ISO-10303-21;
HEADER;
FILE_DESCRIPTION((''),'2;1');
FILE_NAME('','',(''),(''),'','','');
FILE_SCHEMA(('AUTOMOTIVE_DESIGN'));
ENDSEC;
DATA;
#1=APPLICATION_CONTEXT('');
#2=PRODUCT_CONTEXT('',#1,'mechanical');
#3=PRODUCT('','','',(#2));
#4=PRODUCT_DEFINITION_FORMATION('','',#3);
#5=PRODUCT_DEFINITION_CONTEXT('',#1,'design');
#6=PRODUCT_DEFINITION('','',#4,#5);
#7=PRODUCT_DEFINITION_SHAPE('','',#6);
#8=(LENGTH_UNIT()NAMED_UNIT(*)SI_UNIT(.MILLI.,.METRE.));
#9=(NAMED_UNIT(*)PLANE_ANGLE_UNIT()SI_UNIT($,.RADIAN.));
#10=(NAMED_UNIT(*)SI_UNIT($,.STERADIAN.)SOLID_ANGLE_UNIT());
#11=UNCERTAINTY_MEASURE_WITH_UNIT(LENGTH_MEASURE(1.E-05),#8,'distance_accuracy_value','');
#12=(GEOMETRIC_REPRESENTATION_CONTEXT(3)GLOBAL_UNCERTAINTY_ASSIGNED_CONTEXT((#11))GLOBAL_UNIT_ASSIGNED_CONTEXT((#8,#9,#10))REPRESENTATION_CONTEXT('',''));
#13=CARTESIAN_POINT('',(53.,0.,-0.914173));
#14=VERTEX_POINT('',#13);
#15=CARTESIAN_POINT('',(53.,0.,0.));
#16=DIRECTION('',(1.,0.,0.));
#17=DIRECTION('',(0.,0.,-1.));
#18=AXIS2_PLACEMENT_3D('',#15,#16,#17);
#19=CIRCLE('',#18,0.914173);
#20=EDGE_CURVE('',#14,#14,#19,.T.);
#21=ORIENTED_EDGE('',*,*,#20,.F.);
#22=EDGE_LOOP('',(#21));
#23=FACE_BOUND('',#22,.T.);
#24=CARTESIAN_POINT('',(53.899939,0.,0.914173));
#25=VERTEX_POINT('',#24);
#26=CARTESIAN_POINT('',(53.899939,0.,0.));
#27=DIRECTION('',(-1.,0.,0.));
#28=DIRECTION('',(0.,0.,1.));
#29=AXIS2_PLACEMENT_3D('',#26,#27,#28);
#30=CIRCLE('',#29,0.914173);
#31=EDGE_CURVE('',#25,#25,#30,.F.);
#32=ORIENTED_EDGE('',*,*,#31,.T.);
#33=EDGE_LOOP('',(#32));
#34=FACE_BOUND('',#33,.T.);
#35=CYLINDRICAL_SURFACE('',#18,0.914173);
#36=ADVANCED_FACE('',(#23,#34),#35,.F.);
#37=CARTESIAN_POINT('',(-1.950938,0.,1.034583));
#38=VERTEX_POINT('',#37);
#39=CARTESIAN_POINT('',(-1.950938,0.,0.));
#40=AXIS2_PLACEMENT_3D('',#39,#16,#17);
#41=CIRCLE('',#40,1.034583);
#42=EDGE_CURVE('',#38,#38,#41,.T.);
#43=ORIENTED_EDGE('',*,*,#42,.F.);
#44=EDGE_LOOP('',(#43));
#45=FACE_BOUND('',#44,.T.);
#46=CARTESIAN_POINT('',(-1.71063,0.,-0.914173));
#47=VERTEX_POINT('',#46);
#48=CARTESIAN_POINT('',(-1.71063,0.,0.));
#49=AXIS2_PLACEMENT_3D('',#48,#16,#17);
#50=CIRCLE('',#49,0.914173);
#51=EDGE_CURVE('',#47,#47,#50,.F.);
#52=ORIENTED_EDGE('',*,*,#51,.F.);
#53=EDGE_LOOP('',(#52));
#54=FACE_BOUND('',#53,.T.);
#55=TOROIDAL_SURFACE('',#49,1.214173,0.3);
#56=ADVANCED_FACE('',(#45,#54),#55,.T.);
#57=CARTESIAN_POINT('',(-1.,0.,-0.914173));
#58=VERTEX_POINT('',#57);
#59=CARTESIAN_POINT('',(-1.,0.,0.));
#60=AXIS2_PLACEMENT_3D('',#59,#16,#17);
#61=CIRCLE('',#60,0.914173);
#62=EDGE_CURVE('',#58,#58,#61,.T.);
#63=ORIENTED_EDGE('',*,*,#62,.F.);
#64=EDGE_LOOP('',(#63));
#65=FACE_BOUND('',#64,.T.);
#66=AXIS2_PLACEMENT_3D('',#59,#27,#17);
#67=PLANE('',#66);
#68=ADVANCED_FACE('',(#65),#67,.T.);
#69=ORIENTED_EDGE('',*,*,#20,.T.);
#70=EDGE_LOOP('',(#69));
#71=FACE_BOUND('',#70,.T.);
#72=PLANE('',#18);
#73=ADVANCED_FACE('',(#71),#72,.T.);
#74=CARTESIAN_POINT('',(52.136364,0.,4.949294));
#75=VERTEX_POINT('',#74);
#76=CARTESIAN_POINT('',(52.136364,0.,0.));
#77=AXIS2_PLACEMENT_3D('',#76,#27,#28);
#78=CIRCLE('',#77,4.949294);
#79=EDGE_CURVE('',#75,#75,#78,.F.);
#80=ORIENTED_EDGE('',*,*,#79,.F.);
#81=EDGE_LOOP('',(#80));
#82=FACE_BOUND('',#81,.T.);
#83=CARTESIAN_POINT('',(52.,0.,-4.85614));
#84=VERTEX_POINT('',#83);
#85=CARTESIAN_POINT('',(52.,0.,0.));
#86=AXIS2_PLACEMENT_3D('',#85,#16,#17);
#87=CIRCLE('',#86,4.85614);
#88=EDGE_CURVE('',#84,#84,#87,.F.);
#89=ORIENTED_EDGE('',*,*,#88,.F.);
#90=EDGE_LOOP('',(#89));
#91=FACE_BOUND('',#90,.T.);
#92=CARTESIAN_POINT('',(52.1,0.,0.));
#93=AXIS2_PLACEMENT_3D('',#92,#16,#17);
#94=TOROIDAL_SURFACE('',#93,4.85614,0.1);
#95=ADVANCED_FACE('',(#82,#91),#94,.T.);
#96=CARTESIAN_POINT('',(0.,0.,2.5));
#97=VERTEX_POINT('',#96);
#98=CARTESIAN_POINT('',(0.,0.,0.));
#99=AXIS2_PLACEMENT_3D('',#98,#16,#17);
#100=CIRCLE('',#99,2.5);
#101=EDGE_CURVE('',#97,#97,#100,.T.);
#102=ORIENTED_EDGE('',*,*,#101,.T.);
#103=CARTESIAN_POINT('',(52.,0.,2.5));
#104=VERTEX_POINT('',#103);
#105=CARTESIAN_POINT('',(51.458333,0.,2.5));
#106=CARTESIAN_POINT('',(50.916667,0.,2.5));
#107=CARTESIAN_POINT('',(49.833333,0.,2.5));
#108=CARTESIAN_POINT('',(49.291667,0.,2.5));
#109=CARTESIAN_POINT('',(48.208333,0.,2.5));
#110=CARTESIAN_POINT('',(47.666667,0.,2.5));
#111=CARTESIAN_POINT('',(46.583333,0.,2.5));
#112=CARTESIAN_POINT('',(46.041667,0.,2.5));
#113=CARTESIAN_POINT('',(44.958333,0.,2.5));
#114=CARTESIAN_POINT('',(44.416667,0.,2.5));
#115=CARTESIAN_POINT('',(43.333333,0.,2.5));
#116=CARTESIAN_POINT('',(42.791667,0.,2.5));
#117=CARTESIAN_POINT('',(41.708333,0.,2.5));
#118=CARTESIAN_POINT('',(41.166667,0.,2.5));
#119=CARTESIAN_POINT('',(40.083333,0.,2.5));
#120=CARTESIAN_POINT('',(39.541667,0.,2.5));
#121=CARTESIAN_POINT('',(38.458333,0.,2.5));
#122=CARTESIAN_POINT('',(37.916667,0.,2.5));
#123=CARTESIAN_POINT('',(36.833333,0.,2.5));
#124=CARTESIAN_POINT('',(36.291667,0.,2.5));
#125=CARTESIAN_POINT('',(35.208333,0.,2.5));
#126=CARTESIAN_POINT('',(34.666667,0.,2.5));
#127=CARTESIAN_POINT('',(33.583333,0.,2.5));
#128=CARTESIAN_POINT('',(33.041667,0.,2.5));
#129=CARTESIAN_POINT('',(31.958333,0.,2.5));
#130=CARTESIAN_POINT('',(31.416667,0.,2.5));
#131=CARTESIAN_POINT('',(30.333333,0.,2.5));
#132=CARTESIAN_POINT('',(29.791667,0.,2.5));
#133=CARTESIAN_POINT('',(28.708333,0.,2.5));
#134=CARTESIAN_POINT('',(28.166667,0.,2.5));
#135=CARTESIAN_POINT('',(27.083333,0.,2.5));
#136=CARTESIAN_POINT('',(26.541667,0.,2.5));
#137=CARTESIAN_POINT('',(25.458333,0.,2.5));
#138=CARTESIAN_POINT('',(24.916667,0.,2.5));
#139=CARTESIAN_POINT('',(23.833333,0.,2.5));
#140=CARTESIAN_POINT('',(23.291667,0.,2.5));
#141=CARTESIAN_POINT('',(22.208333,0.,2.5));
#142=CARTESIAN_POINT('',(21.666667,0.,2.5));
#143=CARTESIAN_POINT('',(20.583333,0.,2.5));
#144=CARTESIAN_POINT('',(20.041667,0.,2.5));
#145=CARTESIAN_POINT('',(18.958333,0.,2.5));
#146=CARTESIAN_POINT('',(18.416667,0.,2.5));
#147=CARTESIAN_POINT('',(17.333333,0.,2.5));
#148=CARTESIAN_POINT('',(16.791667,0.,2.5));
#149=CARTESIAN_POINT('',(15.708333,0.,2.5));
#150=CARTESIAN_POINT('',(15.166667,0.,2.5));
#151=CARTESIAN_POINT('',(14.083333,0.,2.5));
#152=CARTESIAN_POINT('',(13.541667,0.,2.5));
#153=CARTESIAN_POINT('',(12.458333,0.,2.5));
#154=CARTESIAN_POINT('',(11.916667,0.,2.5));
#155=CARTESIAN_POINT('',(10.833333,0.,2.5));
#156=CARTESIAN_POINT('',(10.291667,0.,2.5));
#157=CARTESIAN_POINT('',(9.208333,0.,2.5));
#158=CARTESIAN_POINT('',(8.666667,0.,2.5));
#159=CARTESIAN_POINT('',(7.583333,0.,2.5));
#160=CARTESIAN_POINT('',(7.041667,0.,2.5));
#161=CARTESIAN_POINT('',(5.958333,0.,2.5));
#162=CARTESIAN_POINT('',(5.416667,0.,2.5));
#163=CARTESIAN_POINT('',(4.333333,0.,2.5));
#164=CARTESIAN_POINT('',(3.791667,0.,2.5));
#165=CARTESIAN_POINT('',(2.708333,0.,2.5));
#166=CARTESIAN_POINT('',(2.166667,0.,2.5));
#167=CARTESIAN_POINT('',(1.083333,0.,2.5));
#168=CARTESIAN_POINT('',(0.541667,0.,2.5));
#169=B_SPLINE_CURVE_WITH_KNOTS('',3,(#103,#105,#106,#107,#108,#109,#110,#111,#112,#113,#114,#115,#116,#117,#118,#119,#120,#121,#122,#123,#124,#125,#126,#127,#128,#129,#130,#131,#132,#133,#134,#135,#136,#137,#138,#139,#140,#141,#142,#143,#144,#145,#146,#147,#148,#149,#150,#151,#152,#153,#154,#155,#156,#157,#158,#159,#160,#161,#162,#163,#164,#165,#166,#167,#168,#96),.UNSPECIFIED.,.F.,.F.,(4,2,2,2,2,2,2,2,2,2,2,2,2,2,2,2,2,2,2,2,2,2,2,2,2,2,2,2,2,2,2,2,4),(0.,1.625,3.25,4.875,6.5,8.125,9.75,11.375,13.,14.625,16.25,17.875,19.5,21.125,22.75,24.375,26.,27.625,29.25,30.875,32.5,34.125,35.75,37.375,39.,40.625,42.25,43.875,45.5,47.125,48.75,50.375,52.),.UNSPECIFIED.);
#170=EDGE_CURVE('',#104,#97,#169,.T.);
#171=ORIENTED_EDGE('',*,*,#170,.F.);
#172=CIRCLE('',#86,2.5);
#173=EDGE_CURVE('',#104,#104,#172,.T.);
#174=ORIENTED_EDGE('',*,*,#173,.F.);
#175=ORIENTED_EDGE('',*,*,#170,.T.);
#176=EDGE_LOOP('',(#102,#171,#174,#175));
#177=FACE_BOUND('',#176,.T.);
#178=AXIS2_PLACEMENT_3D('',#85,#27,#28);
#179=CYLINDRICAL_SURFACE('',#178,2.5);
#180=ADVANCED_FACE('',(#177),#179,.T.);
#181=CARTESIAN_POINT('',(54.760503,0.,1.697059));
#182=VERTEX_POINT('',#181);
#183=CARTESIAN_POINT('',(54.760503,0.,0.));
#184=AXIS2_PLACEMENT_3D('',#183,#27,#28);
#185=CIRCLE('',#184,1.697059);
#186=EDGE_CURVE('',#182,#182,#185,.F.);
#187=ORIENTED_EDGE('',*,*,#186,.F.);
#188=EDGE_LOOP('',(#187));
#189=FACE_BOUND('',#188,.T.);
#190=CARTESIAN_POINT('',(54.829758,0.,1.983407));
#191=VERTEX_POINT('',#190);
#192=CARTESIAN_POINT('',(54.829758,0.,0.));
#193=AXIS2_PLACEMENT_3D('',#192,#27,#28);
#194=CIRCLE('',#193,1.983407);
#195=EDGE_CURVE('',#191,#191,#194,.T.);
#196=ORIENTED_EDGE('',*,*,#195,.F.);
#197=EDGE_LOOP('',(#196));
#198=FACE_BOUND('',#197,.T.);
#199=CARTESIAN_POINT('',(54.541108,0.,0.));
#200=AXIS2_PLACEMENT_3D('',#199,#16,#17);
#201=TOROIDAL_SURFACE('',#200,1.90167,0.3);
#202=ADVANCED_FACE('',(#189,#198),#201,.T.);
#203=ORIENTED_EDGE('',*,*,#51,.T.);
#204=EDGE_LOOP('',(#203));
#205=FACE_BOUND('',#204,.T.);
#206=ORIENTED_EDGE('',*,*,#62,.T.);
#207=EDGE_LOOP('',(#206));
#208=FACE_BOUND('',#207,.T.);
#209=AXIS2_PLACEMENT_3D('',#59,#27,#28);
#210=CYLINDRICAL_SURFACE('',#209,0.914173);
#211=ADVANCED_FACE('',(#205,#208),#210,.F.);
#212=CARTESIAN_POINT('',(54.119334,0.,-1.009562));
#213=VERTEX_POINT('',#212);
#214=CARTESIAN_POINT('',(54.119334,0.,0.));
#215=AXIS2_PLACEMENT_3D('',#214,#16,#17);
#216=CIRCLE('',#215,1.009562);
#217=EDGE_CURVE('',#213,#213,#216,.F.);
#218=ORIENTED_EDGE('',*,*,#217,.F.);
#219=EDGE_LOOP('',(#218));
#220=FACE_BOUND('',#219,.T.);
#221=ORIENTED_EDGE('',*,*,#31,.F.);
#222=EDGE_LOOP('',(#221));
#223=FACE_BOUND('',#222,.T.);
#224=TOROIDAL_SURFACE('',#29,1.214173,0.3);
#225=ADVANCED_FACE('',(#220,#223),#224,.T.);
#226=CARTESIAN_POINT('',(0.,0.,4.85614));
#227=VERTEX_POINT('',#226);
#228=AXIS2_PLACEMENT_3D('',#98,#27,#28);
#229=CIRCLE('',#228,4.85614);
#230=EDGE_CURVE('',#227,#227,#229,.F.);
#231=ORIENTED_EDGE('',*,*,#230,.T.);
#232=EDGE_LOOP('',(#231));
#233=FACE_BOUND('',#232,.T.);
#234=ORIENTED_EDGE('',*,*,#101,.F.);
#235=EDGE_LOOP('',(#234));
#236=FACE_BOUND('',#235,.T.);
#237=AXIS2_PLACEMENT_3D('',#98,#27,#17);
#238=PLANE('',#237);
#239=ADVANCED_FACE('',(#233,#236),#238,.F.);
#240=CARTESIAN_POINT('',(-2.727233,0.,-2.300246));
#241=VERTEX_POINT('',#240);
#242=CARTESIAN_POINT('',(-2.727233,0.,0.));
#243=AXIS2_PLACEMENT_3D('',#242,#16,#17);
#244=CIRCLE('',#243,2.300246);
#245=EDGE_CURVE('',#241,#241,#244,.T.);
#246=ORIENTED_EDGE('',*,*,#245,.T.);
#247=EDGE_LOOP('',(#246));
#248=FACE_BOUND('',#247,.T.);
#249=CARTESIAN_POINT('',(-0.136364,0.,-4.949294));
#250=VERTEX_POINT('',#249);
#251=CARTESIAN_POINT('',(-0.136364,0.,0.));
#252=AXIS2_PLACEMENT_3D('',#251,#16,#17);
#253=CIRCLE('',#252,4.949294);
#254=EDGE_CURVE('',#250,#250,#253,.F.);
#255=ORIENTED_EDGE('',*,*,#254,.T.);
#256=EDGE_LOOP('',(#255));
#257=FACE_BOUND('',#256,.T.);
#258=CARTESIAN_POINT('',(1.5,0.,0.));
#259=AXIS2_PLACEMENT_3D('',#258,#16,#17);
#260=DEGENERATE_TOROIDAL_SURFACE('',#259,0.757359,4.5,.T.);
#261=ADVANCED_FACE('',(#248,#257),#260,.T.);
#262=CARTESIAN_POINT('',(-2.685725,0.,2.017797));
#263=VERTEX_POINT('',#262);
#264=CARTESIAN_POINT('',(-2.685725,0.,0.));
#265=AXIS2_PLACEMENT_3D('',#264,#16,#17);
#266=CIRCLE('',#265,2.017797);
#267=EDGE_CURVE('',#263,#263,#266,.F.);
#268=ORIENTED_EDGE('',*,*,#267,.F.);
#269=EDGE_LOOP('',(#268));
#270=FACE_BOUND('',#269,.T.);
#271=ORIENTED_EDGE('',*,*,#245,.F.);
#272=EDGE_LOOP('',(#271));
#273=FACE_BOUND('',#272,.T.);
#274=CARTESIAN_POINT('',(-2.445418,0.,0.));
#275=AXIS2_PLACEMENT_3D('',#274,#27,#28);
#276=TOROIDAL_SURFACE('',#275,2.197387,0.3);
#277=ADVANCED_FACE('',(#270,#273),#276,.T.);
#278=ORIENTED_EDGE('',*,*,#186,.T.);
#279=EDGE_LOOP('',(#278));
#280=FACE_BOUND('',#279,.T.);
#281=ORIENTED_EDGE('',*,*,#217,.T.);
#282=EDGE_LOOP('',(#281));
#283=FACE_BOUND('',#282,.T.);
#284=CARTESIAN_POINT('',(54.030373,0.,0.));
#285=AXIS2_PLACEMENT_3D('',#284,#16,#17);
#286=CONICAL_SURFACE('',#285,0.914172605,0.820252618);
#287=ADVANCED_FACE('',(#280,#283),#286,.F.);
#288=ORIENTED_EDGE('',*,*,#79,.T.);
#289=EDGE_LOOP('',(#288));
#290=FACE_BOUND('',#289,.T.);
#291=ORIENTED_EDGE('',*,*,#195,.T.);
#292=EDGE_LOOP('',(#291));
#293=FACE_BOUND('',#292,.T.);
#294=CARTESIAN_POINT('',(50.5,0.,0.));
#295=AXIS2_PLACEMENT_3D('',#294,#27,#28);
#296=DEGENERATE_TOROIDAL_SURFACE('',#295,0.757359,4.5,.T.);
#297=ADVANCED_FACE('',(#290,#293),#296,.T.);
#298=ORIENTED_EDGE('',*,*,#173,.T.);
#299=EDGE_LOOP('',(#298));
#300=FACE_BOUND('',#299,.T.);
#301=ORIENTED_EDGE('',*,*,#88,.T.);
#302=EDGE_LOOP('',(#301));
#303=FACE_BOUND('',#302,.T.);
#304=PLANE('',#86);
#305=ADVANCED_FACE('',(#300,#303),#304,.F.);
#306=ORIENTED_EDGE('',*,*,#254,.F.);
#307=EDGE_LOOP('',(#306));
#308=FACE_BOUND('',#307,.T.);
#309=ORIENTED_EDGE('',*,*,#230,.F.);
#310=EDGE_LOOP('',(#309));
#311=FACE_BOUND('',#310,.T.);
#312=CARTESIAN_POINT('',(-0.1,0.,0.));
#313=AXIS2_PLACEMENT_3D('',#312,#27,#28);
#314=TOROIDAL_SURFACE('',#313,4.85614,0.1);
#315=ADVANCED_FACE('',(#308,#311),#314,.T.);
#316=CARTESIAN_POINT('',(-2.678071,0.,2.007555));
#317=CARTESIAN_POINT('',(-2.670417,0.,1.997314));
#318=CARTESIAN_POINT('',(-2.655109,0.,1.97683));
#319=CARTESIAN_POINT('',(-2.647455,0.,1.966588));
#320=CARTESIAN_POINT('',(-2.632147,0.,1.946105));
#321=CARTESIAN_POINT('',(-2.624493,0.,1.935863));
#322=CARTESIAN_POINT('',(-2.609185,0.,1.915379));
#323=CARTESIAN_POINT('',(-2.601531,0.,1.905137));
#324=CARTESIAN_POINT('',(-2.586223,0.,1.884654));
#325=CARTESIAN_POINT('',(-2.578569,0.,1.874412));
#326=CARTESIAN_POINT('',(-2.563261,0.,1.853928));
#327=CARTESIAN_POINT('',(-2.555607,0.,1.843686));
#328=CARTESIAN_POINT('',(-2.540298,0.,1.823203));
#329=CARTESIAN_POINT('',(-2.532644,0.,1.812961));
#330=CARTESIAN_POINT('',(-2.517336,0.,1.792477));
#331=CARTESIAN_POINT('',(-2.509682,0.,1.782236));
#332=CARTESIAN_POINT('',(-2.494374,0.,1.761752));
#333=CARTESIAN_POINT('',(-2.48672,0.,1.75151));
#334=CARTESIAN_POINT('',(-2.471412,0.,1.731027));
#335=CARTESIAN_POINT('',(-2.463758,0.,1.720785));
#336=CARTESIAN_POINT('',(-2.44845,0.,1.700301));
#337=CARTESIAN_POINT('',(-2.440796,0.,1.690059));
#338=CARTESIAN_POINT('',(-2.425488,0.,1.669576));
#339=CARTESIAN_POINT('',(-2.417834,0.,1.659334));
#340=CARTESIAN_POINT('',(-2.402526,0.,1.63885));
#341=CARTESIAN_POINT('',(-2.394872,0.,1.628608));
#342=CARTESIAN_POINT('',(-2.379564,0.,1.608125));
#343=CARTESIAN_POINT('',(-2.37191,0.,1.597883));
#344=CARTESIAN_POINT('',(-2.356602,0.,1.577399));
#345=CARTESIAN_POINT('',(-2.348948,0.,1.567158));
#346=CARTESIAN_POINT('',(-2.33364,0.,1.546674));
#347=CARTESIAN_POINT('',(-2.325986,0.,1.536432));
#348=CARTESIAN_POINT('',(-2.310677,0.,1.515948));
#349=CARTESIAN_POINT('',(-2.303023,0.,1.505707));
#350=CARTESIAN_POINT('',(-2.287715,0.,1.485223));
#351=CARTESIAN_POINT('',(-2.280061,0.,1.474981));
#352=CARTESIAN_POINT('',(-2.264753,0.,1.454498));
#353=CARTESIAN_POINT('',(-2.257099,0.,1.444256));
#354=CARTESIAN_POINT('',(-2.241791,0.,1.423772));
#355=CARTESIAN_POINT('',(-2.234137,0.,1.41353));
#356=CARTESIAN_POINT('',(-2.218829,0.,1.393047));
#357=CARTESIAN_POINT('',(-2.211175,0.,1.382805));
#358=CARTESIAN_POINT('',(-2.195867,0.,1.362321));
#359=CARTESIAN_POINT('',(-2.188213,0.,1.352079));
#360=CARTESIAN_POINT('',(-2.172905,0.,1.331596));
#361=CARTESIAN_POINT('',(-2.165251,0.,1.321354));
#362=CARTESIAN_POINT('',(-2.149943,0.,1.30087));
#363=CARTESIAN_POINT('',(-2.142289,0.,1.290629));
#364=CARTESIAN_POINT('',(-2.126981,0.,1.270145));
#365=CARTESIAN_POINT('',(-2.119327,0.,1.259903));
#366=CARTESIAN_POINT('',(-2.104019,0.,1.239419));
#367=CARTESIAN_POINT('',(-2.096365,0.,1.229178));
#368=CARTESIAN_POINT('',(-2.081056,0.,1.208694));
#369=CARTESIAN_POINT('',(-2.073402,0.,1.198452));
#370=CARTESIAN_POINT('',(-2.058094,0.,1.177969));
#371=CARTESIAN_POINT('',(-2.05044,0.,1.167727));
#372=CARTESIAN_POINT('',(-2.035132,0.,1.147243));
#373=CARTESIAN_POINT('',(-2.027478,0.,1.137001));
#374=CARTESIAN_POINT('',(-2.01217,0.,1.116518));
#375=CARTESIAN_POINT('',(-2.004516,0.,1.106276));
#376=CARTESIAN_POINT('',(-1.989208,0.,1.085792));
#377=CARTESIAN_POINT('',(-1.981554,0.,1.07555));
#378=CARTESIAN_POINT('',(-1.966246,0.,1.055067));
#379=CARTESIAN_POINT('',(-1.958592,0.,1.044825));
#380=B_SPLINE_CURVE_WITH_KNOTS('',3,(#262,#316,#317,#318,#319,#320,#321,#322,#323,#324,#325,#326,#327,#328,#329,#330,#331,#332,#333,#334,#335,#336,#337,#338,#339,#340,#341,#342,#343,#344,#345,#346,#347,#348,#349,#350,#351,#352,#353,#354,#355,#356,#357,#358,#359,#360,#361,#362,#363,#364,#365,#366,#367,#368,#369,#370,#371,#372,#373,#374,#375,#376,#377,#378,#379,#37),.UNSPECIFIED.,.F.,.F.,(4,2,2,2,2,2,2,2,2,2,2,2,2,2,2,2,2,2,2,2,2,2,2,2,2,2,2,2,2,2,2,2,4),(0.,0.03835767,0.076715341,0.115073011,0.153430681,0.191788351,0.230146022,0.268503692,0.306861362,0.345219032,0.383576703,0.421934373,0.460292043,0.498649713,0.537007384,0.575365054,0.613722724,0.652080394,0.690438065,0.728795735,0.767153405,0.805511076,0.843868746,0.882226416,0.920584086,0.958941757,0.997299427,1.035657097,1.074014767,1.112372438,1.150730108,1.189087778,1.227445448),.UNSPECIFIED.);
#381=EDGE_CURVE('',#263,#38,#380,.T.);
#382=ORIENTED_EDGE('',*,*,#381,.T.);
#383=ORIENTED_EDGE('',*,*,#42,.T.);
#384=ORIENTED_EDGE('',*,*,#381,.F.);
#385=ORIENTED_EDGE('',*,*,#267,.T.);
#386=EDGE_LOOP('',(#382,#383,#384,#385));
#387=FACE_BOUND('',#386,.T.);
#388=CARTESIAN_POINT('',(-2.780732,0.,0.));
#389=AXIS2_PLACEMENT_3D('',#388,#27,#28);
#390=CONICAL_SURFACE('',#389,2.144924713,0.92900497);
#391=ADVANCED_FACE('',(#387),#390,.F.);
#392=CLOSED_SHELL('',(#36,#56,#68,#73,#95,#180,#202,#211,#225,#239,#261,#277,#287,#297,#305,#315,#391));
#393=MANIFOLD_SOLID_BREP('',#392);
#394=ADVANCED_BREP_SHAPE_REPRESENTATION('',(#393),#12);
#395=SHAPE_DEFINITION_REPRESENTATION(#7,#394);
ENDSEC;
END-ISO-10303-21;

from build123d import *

# Parameters (mm, degrees)
SKETCH1_R           = 2.5000000000000004
BOSS_EXTRUDE1_DEPTH = 52
SKETCH2_R           = 5
BOSS_EXTRUDE2_DEPTH = 3
FILLET1_R           = 4.5
FILLET2_R           = 0.1
SKETCH3_R           = 0.9141726050679063
CUT_EXTRUDE2_DEPTH  = 2
CHAMFER2_SIZE       = 0.966893524
FILLET4_R           = 0.3


with BuildPart() as part:
    # Sketch1 → Boss-Extrude1 (new body)
    with BuildSketch(Plane(origin=(0, 0, 0), x_dir=(0, 0, -1), z_dir=(1, 0, 0))):
        with Locations(Location((0, 0, 0), (0, 0, 180))):
            Circle(SKETCH1_R)
    extrude(amount=BOSS_EXTRUDE1_DEPTH)

    # Sketch2 → Boss-Extrude2 (add)
    with BuildSketch(Plane(origin=(52, 0, 0), x_dir=(0, 0, -1), z_dir=(1, 0, 0))):
        Circle(SKETCH2_R)
    extrude(amount=BOSS_EXTRUDE2_DEPTH)

    # Fillet1
    # the kernel refuses this fillet: 4.5 mm, written as the material it takes off along each edge
    with BuildSketch(Plane(origin=(55, 0, 0), x_dir=(0, 0, -1), z_dir=(0, -1, 0))) as fillet1_piece_1:
        with BuildLine():
            CenterArc((0.7573593128807142, -4.5), FILLET1_R, 19.471220634490688, 70.52877936550931)
            Line((0.7573593128807142, 0), (0.7573593128807142, 0.09000000000000341))
            Line((0.7573593128807142, 0.09000000000000341), (5, 0.09000000000000341))
            Line((5, 0.09000000000000341), (5.09, 0))
            ThreePointArc((5.09, 0), (5.09, -1.5), (5.084852813742386, -2.969999999999999))
            Line((5.084852813742386, -2.969999999999999), (5, -3))
        make_face()
    revolve(axis=Axis((55, 0, 0), (1, 0, 0)), mode=Mode.SUBTRACT)

    # Fillet2
    fillet2_edges = [part.edges().sort_by_distance(p)[0] for p in [
        (52, 6.1e-16, 5),
    ]]
    fillet(fillet2_edges, radius=FILLET2_R)

    # Sketch3 → Cut-Extrude2 (cut)
    with BuildSketch(Plane(origin=(55, 0, 0), x_dir=(0, 0, -1), z_dir=(1, 0, 0))):
        Circle(SKETCH3_R)
    extrude(amount=-CUT_EXTRUDE2_DEPTH, mode=Mode.SUBTRACT)

    # Chamfer2
    # the kernel refuses this chamfer: 1, 0.966893524 mm, written as the material it takes off along each edge
    with BuildSketch(Plane(origin=(54.99726690239676, -1.3886838e-10, -1.3383106e-10), x_dir=(0, 1.519058447411492e-10, -1.0), z_dir=(0, 1.0, 1.519058447411492e-10))) as chamfer2_piece_1:
        with BuildLine():
            Line((1.8179357472686162, 0.12403267277841934), (0.9141726049340748 + CHAMFER2_SIZE * 2.76827336351e-10, CHAMFER2_SIZE))
            Line((0.9141726049340748 + CHAMFER2_SIZE * 2.76827336351e-10, CHAMFER2_SIZE), (0.9141726049340748, 0))
            ThreePointArc((0.9141726049340748, 0), (1.3817426920873381, 0.04079459843951838), (1.8179357472686162, 0.12403267277841934))
        make_face()
    revolve(axis=Axis((54.99726690239676, -1.3886838e-10, -1.3383106e-10), (-1, 0, 0)), mode=Mode.SUBTRACT)

    # Fillet4
    fillet4_edges = [part.edges().sort_by_distance(p)[0] for p in [
        (54.030373378397, -2.7795435e-10, 0.9141726050676625),
        (54.873234229619, -4.1532646e-10, 1.8179357471350002),
    ]]
    fillet(fillet4_edges, radius=FILLET4_R)

    # Mirror3: read off the stored shape, not the designer's step
    # Mirror3 outline → Mirror3 (revolve)
    with BuildSketch(Plane.YX):
        with BuildLine():
            ThreePointArc((2.300245804, -2.727233289), (3.903816696, -1.717111427), (4.949293717, -0.136363636))
            ThreePointArc((4.949293717, -0.136363636), (4.938711901, -0.043592392), (4.856139619, 0))
            Line((4.856139619, 0), (0, 0))
            Line((0, 0), (0, -1))
            Line((0, -1), (0.914172605, -1))
            Line((0.914172605, -1), (0.914172605, -1.710630444))
            ThreePointArc((0.914172605, -1.710630444), (0.945959239, -1.845023861), (1.034583208, -1.950937849))
            Line((1.034583208, -1.950937849), (2.017797308, -2.68572514))
            ThreePointArc((2.017797308, -2.68572514), (2.153767715, -2.74222977), (2.300245804, -2.727233289))
        make_face()
    revolve(axis=Axis((0, 0, 0), (1, 0, 0)))


solid = part.part
